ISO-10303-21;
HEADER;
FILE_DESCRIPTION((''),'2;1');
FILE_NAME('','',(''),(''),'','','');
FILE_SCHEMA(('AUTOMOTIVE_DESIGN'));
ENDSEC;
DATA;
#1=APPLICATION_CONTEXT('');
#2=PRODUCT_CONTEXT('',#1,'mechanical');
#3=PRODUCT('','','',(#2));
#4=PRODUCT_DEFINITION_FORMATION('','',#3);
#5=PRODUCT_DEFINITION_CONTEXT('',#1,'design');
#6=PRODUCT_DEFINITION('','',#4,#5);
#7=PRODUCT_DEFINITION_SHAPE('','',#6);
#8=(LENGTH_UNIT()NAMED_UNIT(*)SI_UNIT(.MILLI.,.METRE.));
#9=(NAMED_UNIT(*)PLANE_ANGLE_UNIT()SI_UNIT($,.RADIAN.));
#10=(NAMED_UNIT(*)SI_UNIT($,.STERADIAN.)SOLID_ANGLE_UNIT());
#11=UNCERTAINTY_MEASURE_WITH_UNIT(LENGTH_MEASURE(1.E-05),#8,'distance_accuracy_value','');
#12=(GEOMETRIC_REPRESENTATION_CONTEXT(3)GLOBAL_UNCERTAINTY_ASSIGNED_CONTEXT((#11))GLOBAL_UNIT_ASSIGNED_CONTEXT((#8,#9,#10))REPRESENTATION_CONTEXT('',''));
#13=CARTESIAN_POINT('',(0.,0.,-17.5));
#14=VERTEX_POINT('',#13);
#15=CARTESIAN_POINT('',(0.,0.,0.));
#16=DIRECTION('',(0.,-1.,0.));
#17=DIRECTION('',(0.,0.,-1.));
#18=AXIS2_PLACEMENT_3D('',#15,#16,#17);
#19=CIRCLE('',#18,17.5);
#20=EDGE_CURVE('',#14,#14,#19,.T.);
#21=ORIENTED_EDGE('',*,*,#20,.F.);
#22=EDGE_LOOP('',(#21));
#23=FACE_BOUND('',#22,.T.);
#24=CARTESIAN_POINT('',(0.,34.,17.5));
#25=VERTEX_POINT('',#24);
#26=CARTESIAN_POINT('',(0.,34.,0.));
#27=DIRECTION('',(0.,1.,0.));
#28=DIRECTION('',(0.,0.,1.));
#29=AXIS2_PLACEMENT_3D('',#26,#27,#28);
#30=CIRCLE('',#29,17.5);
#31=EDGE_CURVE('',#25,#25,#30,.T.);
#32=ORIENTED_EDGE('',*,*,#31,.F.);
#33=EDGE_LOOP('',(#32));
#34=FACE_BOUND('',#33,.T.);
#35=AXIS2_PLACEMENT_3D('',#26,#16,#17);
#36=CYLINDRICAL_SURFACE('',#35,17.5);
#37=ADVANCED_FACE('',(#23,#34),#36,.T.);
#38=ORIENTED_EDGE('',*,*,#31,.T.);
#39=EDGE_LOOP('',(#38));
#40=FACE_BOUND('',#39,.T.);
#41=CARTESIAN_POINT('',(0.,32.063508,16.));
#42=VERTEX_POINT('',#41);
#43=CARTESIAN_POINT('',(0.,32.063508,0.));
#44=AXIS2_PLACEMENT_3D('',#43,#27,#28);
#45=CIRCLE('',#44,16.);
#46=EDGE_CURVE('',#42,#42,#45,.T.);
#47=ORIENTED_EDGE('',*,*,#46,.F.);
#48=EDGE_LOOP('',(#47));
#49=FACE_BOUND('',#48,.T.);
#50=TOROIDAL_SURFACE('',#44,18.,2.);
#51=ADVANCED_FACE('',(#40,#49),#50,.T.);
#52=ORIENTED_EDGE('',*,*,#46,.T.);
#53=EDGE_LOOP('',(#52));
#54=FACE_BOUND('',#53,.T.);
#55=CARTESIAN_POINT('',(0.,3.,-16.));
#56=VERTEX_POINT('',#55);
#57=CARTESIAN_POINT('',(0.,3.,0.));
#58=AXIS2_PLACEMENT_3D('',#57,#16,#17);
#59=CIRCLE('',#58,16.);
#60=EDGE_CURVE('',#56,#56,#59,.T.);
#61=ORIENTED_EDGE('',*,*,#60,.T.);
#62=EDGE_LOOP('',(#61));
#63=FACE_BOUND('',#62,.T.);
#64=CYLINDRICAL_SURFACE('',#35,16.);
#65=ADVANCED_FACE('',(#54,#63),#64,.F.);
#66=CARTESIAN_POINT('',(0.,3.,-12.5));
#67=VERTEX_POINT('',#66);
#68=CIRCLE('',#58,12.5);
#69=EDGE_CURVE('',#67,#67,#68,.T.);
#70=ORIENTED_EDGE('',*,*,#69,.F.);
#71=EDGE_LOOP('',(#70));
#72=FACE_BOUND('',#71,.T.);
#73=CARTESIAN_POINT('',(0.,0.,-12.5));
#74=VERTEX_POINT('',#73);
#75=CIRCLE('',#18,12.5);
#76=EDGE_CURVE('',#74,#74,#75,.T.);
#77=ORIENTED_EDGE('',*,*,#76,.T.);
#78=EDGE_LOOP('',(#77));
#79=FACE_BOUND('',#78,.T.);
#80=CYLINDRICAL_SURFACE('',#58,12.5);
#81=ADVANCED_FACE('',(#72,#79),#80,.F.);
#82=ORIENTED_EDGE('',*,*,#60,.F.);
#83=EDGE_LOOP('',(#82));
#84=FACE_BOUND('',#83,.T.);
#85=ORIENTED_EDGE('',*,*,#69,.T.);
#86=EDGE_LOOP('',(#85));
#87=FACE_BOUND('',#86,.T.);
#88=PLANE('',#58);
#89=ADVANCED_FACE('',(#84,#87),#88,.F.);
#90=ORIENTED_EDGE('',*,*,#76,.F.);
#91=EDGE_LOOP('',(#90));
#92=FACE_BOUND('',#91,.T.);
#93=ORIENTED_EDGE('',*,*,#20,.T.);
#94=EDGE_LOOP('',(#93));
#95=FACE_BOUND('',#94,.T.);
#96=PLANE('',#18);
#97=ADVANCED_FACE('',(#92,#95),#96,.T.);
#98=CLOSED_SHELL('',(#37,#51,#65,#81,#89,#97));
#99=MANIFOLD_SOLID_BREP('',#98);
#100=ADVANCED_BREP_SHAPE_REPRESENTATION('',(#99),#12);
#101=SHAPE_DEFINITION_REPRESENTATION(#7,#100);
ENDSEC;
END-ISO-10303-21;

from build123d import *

# Parameters (mm, degrees)
SKETCH1_R            = 17.5
SKETCH1_R_2          = 16
BOSS_EXTRUDE1_DEPTH  = 34
SKETCH2_R            = 17.5
BOSS_EXTRUDE2_DEPTH  = 3
FILLET1_R            = 2
SKETCH3_R            = 11
BOSS_EXTRUDE3_DEPTH  = 30
CUT_EXTRUDE1_DEPTH   = 35
SKETCH6_W            = 7.99098924
SKETCH6_H            = 6.392791393
BOSS_EXTRUDE4_DEPTH  = 24
SPLIT1_OUTLINE_R     = 11
SPLIT1_DEPTH         = 33
SPLIT1_2_OUTLINE_R   = 17.5
SPLIT1_2_OUTLINE_R_2 = 11
SPLIT1_2_DEPTH       = 3
SKETCH7_R            = 17.5
SKETCH7_R_2          = 16
BOSS_EXTRUDE5_DEPTH  = 3
SKETCH8_R            = 17.5
SKETCH8_R_2          = 12.5
BOSS_EXTRUDE6_DEPTH  = 3


# Read off the part's stored shape, not the designer's step: Split1
with BuildPart() as part:
    # Sketch1 → Boss-Extrude1 (new body)
    with BuildSketch(Plane(origin=(0, 0, 0), x_dir=(1, 0, 0), z_dir=(0, 1, 0))):
        with Locations(Location((0, 0, 0), (0, 0, 270))):
            Circle(SKETCH1_R)
        with Locations(Location((0, 0, 0), (0, 0, 270))):
            Circle(SKETCH1_R_2, mode=Mode.SUBTRACT)
    extrude(amount=BOSS_EXTRUDE1_DEPTH)

    # Sketch2 → Boss-Extrude2 (add)
    with BuildSketch(Plane(origin=(0, 0, 0), x_dir=(1, 0, 0), z_dir=(0, 1, 0))):
        with Locations(Location((0, 0, 0), (0, 0, 270))):
            Circle(SKETCH2_R)
    extrude(amount=BOSS_EXTRUDE2_DEPTH)

    # Fillet1
    # the kernel refuses this fillet: 2 mm, written as the material it takes off along each edge
    with BuildSketch(Plane(origin=(0, 34, 0), x_dir=(0, 0, 1), z_dir=(-1, 0, 0))) as fillet1_piece_1:
        with BuildLine():
            CenterArc((18, -1.936491673), FILLET1_R, 104.477512186, 75.522487814)
            Line((16, -1.936491673), (15.96, -1.936491673))
            Line((15.96, -1.936491673), (15.96, 0))
            Line((15.96, 0), (16, 0.04))
            ThreePointArc((16, 0.04), (16.75, 0.04), (17.49, 0.038729833))
            Line((17.49, 0.038729833), (17.5, 0))
        make_face()
    revolve(axis=Axis((0, 34, 0), (0, 1, 0)), mode=Mode.SUBTRACT)

    # Sketch3 → Boss-Extrude3 (add)
    with BuildSketch(Plane(origin=(0, 3, 0), x_dir=(1, 0, 0), z_dir=(0, 1, 0))):
        with Locations(Location((0, 0, 0), (0, 0, 270))):
            Circle(SKETCH3_R)
    extrude(amount=BOSS_EXTRUDE3_DEPTH)

    # Sketch5 → Cut-Extrude1 (cut)
    with BuildSketch(Plane(origin=(0, 33, 0), x_dir=(1, 0, 0), z_dir=(0, 1, 0))):
        with BuildLine():
            Line((-1.077438314, 1.385334501), (1.077438314, 1.385334501))
            ThreePointArc((1.077438314, 1.385334501), (0, -1.755), (-1.077438314, 1.385334501))
        make_face()
    extrude(amount=-CUT_EXTRUDE1_DEPTH, mode=Mode.SUBTRACT)

    # Sketch6 → Boss-Extrude4 (add)
    with BuildSketch(Plane(origin=(0, 33, 0), x_dir=(1, 0, 0), z_dir=(0, 1, 0))):
        with Locations((0.014035957, -0.788514839)):
            Rectangle(SKETCH6_W, SKETCH6_H)
    extrude(amount=-BOSS_EXTRUDE4_DEPTH)

    # Split1 outline → Split1 (cut)
    with BuildSketch(Plane(origin=(0, 0, 0), x_dir=(1, 0, 0), z_dir=(0, 1, 0))):
        Circle(SPLIT1_OUTLINE_R)
    extrude(amount=SPLIT1_DEPTH, mode=Mode.SUBTRACT)

    # Split1 2 outline → Split1 2 (cut)
    with BuildSketch(Plane(origin=(0, 0, 0), x_dir=(1, 0, 0), z_dir=(0, 1, 0))):
        Circle(SPLIT1_2_OUTLINE_R)
        Circle(SPLIT1_2_OUTLINE_R_2, mode=Mode.SUBTRACT)
    extrude(amount=SPLIT1_2_DEPTH, mode=Mode.SUBTRACT)

    # Sketch7 → Boss-Extrude5 (add)
    with BuildSketch(Plane(origin=(0, 0, 0), x_dir=(-1, 0, 0), z_dir=(0, -1, 0))):
        with Locations(Location((0, 0, 0), (0, 0, 90))):
            Circle(SKETCH7_R)
        with Locations(Location((0, 0, 0), (0, 0, 90))):
            Circle(SKETCH7_R_2, mode=Mode.SUBTRACT)
    extrude(amount=-BOSS_EXTRUDE5_DEPTH)

    # Sketch8 → Boss-Extrude6 (add)
    with BuildSketch(Plane(origin=(0, 0, 0), x_dir=(-1, 0, 0), z_dir=(0, -1, 0))):
        with Locations(Location((0, 0, 0), (0, 0, 90))):
            Circle(SKETCH8_R)
        with Locations(Location((0, 0, 0), (0, 0, 90))):
            Circle(SKETCH8_R_2, mode=Mode.SUBTRACT)
    extrude(amount=-BOSS_EXTRUDE6_DEPTH)


solid = part.part
